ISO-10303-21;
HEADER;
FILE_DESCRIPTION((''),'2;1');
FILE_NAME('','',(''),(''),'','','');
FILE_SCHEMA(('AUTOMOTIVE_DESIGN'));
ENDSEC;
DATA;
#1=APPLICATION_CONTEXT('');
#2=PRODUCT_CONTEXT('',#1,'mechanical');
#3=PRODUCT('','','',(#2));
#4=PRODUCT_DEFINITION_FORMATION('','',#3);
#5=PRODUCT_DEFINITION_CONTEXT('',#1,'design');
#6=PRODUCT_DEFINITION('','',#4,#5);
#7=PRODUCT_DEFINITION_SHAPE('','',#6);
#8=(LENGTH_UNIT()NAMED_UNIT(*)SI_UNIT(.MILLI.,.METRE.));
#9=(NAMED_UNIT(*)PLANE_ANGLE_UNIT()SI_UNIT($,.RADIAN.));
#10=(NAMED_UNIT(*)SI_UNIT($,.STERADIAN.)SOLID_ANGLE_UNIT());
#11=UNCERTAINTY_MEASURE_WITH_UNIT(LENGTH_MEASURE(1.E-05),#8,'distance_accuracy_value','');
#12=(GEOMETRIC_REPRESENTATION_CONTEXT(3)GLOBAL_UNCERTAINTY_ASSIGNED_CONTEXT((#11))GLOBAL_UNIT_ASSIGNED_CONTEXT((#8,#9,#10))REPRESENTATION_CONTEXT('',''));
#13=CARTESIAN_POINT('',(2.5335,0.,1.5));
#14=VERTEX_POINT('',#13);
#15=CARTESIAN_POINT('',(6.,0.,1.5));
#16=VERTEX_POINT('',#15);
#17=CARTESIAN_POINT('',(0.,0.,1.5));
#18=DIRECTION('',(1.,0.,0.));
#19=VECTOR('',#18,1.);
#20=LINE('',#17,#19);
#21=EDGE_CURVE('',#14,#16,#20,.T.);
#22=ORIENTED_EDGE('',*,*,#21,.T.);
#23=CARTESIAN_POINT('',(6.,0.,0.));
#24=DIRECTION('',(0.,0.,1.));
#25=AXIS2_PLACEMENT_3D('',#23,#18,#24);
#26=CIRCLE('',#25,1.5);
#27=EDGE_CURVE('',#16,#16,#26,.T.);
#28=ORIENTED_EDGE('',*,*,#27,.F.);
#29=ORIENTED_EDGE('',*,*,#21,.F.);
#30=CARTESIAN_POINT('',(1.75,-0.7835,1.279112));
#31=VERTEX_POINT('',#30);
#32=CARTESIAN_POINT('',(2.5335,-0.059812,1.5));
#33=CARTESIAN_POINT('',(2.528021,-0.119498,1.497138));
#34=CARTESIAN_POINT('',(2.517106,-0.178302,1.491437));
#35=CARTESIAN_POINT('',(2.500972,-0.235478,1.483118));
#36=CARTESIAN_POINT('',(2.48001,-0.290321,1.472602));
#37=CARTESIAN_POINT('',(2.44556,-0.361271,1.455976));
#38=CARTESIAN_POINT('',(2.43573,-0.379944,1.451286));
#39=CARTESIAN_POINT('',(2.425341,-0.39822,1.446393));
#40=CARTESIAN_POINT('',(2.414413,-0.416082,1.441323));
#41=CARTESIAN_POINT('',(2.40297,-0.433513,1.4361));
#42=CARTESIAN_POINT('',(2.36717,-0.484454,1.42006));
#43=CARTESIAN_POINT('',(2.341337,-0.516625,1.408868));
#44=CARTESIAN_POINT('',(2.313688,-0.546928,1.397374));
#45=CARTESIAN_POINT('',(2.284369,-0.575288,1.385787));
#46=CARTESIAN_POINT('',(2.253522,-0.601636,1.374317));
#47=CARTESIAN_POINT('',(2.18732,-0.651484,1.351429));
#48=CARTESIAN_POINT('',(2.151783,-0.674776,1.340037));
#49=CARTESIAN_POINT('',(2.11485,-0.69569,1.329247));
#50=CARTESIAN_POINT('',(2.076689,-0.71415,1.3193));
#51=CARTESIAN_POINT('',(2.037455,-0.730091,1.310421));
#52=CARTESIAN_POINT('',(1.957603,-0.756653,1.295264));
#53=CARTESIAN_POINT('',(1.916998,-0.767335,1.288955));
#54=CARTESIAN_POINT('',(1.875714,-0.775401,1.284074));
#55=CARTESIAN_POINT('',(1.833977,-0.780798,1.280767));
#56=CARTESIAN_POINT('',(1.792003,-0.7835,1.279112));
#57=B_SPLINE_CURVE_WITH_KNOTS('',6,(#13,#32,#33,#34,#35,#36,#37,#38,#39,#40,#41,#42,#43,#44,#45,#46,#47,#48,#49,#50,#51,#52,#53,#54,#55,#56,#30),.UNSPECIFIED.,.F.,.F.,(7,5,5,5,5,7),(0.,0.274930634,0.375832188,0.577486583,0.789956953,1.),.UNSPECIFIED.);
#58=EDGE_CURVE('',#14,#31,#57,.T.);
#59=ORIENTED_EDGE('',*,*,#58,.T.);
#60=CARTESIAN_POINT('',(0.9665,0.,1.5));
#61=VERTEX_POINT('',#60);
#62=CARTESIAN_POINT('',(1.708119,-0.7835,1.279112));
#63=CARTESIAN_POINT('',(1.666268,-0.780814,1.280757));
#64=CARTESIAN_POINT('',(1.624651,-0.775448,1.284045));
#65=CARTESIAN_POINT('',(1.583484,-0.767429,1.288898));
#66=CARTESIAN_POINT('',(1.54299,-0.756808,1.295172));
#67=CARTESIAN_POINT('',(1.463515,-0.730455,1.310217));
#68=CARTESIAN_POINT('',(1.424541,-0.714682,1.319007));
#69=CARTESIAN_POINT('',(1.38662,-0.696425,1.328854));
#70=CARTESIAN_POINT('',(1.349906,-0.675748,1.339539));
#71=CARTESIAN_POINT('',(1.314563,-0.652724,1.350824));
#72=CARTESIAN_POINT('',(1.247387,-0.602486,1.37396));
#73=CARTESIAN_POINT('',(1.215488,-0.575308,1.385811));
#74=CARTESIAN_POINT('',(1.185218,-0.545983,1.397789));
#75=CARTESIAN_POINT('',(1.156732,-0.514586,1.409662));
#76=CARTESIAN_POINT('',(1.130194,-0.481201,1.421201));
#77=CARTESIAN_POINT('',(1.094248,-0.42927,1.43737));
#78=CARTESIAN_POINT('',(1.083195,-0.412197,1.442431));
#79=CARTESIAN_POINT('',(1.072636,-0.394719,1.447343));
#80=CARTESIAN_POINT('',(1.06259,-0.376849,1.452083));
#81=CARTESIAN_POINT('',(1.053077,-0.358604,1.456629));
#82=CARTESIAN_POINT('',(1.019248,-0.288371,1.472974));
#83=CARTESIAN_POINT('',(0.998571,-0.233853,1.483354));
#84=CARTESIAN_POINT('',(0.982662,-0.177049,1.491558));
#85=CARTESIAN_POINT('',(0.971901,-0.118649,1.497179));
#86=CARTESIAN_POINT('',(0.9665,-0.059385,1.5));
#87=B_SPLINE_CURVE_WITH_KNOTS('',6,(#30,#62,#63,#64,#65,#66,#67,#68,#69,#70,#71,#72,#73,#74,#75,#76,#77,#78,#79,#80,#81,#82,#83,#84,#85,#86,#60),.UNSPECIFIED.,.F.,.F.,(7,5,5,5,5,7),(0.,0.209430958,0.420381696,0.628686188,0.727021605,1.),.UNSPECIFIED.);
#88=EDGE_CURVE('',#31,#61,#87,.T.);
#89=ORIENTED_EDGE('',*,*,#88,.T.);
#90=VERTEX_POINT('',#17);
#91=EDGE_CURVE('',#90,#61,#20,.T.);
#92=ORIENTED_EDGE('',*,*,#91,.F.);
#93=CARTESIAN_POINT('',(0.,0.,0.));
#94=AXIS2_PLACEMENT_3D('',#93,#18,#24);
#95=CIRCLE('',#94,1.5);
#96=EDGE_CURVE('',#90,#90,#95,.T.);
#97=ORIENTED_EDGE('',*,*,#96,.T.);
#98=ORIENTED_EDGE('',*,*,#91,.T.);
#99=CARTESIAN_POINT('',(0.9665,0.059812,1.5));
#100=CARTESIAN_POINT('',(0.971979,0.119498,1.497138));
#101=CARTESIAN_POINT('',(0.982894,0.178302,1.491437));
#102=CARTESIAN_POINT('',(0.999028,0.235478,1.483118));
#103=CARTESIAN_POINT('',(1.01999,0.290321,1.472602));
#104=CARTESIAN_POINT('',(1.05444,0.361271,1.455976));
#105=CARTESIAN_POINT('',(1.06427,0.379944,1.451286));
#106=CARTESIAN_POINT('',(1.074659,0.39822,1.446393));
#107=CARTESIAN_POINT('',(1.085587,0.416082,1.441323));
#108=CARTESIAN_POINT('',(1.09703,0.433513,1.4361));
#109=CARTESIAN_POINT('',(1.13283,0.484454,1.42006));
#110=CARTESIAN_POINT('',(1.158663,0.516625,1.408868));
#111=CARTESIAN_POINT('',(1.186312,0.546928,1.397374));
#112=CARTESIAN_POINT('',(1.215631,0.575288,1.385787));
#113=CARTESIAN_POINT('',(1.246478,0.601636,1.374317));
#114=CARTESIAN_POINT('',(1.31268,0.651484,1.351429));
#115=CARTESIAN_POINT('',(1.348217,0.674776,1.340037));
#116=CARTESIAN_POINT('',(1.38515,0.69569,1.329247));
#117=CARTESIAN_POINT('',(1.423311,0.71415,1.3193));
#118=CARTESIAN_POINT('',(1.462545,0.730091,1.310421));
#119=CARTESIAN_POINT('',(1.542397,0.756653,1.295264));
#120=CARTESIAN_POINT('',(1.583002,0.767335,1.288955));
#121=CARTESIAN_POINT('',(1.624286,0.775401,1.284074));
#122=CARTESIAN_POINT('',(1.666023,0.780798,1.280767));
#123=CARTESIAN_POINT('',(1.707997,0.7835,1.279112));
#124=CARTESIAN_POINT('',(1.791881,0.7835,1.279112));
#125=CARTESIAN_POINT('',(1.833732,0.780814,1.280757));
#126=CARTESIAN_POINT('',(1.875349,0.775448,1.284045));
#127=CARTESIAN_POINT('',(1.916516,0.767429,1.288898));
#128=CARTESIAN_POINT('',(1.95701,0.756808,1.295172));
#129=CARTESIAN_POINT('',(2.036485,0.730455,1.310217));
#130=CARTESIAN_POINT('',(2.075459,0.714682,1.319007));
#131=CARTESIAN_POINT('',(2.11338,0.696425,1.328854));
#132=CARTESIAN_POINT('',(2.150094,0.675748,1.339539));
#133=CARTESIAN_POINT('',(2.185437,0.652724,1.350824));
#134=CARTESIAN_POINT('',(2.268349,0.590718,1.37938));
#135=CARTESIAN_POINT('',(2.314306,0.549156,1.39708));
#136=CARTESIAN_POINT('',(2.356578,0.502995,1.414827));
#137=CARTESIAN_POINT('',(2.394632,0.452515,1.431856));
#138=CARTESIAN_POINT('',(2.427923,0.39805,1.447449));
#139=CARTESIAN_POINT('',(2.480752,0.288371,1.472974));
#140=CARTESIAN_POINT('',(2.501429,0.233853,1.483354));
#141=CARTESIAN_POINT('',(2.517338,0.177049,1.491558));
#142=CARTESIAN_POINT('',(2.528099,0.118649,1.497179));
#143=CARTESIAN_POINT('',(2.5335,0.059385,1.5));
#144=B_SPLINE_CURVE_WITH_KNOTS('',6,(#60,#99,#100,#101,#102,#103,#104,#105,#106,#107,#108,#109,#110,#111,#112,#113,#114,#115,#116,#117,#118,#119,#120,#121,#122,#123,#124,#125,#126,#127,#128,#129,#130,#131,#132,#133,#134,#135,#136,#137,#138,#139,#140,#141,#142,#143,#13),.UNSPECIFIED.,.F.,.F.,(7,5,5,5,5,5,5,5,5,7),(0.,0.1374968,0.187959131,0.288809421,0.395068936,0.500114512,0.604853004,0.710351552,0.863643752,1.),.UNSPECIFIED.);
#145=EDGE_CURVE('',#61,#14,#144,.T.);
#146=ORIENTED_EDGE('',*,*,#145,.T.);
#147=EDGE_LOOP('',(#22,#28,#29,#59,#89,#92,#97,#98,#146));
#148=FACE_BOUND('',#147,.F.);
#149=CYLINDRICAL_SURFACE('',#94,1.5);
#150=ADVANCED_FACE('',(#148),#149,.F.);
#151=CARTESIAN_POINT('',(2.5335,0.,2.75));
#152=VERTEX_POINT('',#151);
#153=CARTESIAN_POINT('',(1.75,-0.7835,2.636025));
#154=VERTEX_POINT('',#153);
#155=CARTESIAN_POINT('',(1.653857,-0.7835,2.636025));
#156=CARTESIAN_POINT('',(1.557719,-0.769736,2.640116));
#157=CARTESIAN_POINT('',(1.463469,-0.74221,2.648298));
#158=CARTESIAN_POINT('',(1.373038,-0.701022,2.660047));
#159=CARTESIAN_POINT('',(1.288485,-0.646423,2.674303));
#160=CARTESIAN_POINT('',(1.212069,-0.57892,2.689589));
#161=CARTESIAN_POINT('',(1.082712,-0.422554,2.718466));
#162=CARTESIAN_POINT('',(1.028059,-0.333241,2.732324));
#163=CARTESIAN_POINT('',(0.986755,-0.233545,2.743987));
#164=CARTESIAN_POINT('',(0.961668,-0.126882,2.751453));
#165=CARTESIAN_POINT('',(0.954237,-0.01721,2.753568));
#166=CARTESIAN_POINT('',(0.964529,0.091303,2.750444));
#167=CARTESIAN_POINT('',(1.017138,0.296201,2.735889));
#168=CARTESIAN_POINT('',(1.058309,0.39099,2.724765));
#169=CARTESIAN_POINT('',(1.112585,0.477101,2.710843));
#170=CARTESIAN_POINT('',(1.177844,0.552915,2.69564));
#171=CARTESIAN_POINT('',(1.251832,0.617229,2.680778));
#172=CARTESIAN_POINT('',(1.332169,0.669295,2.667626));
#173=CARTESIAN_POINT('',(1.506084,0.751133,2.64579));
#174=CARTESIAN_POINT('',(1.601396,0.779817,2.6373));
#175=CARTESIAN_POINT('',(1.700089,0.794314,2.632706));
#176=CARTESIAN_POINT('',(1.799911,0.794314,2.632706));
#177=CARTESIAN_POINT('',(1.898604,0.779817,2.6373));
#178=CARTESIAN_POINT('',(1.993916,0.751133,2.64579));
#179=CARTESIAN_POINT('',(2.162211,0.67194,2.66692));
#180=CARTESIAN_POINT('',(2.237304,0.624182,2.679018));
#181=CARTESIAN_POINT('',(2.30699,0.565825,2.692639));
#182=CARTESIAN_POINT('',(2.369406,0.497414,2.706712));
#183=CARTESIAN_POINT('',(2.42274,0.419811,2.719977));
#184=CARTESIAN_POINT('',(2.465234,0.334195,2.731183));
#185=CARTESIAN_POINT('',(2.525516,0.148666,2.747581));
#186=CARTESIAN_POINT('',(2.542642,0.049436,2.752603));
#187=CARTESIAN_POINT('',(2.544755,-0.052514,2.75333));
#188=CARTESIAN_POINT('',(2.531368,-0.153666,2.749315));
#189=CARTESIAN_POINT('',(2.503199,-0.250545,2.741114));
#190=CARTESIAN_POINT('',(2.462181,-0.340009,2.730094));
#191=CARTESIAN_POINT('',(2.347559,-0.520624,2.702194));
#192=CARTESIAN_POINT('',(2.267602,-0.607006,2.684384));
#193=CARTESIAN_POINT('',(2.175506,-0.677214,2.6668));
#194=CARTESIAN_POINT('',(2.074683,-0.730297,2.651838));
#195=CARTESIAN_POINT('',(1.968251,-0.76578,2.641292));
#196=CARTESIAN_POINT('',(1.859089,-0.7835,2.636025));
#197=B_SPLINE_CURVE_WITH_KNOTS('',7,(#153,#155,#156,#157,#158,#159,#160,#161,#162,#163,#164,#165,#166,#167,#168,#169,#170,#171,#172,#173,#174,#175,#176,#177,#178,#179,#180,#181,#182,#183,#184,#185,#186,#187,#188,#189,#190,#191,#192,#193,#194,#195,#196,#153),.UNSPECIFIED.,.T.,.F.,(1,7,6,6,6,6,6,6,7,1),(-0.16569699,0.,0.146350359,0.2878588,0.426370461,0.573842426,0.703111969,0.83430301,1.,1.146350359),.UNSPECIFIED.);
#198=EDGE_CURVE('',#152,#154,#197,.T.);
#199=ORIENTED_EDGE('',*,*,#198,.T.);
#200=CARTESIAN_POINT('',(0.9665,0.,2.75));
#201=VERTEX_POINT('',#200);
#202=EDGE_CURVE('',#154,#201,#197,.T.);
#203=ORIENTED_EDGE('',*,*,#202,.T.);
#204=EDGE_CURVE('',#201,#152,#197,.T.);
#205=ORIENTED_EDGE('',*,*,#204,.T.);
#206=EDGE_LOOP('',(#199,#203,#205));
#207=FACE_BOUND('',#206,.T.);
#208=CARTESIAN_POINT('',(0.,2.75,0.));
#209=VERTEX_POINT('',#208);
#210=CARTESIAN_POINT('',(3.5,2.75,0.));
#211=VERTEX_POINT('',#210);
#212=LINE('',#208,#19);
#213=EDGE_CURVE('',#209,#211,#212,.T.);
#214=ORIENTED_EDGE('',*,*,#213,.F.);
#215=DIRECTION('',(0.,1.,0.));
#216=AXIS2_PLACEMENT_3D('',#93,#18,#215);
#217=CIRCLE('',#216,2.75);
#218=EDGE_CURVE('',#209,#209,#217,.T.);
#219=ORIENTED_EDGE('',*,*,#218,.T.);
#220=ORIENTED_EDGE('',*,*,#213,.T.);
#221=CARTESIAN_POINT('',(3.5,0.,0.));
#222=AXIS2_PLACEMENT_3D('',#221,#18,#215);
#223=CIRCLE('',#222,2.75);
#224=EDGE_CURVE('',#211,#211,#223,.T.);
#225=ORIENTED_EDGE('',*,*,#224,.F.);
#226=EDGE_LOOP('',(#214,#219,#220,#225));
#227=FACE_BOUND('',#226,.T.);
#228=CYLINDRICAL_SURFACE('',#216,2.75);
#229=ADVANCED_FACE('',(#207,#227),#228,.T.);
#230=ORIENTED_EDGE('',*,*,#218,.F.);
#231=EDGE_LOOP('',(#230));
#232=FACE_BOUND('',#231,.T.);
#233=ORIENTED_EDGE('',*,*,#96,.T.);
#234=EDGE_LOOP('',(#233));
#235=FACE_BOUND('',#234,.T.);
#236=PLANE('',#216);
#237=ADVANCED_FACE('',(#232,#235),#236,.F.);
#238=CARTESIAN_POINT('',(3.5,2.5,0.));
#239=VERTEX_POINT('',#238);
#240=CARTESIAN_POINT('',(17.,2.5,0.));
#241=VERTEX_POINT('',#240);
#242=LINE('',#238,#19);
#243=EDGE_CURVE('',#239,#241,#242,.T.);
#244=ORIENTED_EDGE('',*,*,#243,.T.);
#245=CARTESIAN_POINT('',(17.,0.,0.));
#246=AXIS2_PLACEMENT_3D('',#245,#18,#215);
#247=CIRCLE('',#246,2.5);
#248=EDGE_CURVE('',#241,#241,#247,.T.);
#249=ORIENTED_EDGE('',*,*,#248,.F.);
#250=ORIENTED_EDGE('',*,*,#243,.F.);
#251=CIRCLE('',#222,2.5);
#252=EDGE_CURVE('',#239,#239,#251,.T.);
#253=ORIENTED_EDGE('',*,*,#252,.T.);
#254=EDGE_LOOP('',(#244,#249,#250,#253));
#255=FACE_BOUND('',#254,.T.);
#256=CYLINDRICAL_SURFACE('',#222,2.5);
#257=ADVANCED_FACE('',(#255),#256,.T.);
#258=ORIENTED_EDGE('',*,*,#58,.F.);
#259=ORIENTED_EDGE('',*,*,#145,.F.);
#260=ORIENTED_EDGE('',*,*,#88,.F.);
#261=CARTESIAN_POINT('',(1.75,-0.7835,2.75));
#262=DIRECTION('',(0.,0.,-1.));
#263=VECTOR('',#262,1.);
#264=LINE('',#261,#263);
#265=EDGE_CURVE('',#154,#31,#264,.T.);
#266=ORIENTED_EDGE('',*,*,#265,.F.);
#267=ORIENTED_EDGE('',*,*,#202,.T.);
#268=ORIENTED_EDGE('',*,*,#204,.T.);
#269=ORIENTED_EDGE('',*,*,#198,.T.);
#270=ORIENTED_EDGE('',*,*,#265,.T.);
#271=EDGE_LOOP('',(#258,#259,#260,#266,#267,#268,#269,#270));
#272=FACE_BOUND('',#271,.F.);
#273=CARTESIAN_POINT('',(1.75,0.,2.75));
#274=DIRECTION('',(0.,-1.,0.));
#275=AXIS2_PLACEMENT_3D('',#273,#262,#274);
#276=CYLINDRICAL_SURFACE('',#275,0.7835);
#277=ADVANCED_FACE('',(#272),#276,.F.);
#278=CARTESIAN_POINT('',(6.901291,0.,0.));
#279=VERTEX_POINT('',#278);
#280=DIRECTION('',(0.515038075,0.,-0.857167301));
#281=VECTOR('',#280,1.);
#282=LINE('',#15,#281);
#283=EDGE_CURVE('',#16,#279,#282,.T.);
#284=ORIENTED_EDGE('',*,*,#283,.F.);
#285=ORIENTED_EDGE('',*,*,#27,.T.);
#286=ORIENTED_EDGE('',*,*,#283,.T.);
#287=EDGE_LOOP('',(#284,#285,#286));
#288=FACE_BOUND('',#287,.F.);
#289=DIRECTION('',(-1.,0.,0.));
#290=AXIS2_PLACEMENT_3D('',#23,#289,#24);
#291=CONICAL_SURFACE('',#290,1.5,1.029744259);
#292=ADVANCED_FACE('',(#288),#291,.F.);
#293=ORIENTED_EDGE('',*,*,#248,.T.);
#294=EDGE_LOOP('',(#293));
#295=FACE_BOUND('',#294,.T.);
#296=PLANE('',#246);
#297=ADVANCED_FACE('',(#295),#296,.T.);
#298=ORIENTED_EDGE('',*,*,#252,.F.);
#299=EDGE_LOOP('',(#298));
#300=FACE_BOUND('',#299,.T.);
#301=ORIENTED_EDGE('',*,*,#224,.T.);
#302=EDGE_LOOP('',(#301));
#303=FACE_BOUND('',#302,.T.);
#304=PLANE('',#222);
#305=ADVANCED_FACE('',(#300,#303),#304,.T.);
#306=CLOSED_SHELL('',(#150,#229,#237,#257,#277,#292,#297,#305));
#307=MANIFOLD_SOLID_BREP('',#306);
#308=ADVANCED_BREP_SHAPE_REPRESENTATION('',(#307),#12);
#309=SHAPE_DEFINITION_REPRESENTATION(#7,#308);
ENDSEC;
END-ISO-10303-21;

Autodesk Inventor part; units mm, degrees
ref_plane "YZ Plane" through (0, 0, 0) normal (1, 0, 0) x (0, 1, 0)
ref_plane "XZ Plane" through (0, 0, 0) normal (0, 1, 0) x (-1, 0, 0)
sketch "Skizze1" plane through (0, 0, 0) normal (0, 0, 1) x (1, 0, 0)
  line L0 (-3.4, 0) -> (20.4, 0) projected
  line L1 (0, -0.55) -> (0, 3.3) projected
  line L2 (0, 2.75) -> (3.5, 2.75)
  line L3 (3.5, 2.75) -> (3.5, 2.5)
  line L4 (3.5, 2.5) -> (17, 2.5)
  line L5 (17, 2.5) -> (17, 0)
  line L6 (17, 0) -> (0, 0)
  line L7 (0, 0) -> (0, 2.75)
  dimension "d0" = 5.5
  dimension "d1" = 5
  dimension "d2" = 3.5
  dimension "d3" = 17
revolve "Umdrehung1" add sketch "Skizze1" angle 360 about axis through (-10, 0, 0) along (1, 0, 0)
hole "Bohrung1" at (0, 0, 0) direction (1, 0, 0) diameter 3 depth 6 tip angle 118
ref_plane "Arbeitsebene1" through (1.75, 0, 2.75) normal (0, 0, 1) x (1, 0, 0)
sketch "Skizze2" plane through (1.75, 0, 2.75) normal (0, 0, 1) x (1, 0, 0)
  line L0 (-5.15, 0) -> (18.65, 0) projected
  line L1 (-1.75, -3.85) -> (-1.75, 3.85) projected
  point P0 (-1.75, 0)
  point P1 (0, 0)
  dimension "d14" = 1.75
hole "Bohrung2" at (1.75, 0, 2.75) direction (0, 0, -1) diameter 1.567 end up to surface thread size "M2x0.4" class "6H" standard "ISO Metric profile"
properties part number "13_1087_027"
